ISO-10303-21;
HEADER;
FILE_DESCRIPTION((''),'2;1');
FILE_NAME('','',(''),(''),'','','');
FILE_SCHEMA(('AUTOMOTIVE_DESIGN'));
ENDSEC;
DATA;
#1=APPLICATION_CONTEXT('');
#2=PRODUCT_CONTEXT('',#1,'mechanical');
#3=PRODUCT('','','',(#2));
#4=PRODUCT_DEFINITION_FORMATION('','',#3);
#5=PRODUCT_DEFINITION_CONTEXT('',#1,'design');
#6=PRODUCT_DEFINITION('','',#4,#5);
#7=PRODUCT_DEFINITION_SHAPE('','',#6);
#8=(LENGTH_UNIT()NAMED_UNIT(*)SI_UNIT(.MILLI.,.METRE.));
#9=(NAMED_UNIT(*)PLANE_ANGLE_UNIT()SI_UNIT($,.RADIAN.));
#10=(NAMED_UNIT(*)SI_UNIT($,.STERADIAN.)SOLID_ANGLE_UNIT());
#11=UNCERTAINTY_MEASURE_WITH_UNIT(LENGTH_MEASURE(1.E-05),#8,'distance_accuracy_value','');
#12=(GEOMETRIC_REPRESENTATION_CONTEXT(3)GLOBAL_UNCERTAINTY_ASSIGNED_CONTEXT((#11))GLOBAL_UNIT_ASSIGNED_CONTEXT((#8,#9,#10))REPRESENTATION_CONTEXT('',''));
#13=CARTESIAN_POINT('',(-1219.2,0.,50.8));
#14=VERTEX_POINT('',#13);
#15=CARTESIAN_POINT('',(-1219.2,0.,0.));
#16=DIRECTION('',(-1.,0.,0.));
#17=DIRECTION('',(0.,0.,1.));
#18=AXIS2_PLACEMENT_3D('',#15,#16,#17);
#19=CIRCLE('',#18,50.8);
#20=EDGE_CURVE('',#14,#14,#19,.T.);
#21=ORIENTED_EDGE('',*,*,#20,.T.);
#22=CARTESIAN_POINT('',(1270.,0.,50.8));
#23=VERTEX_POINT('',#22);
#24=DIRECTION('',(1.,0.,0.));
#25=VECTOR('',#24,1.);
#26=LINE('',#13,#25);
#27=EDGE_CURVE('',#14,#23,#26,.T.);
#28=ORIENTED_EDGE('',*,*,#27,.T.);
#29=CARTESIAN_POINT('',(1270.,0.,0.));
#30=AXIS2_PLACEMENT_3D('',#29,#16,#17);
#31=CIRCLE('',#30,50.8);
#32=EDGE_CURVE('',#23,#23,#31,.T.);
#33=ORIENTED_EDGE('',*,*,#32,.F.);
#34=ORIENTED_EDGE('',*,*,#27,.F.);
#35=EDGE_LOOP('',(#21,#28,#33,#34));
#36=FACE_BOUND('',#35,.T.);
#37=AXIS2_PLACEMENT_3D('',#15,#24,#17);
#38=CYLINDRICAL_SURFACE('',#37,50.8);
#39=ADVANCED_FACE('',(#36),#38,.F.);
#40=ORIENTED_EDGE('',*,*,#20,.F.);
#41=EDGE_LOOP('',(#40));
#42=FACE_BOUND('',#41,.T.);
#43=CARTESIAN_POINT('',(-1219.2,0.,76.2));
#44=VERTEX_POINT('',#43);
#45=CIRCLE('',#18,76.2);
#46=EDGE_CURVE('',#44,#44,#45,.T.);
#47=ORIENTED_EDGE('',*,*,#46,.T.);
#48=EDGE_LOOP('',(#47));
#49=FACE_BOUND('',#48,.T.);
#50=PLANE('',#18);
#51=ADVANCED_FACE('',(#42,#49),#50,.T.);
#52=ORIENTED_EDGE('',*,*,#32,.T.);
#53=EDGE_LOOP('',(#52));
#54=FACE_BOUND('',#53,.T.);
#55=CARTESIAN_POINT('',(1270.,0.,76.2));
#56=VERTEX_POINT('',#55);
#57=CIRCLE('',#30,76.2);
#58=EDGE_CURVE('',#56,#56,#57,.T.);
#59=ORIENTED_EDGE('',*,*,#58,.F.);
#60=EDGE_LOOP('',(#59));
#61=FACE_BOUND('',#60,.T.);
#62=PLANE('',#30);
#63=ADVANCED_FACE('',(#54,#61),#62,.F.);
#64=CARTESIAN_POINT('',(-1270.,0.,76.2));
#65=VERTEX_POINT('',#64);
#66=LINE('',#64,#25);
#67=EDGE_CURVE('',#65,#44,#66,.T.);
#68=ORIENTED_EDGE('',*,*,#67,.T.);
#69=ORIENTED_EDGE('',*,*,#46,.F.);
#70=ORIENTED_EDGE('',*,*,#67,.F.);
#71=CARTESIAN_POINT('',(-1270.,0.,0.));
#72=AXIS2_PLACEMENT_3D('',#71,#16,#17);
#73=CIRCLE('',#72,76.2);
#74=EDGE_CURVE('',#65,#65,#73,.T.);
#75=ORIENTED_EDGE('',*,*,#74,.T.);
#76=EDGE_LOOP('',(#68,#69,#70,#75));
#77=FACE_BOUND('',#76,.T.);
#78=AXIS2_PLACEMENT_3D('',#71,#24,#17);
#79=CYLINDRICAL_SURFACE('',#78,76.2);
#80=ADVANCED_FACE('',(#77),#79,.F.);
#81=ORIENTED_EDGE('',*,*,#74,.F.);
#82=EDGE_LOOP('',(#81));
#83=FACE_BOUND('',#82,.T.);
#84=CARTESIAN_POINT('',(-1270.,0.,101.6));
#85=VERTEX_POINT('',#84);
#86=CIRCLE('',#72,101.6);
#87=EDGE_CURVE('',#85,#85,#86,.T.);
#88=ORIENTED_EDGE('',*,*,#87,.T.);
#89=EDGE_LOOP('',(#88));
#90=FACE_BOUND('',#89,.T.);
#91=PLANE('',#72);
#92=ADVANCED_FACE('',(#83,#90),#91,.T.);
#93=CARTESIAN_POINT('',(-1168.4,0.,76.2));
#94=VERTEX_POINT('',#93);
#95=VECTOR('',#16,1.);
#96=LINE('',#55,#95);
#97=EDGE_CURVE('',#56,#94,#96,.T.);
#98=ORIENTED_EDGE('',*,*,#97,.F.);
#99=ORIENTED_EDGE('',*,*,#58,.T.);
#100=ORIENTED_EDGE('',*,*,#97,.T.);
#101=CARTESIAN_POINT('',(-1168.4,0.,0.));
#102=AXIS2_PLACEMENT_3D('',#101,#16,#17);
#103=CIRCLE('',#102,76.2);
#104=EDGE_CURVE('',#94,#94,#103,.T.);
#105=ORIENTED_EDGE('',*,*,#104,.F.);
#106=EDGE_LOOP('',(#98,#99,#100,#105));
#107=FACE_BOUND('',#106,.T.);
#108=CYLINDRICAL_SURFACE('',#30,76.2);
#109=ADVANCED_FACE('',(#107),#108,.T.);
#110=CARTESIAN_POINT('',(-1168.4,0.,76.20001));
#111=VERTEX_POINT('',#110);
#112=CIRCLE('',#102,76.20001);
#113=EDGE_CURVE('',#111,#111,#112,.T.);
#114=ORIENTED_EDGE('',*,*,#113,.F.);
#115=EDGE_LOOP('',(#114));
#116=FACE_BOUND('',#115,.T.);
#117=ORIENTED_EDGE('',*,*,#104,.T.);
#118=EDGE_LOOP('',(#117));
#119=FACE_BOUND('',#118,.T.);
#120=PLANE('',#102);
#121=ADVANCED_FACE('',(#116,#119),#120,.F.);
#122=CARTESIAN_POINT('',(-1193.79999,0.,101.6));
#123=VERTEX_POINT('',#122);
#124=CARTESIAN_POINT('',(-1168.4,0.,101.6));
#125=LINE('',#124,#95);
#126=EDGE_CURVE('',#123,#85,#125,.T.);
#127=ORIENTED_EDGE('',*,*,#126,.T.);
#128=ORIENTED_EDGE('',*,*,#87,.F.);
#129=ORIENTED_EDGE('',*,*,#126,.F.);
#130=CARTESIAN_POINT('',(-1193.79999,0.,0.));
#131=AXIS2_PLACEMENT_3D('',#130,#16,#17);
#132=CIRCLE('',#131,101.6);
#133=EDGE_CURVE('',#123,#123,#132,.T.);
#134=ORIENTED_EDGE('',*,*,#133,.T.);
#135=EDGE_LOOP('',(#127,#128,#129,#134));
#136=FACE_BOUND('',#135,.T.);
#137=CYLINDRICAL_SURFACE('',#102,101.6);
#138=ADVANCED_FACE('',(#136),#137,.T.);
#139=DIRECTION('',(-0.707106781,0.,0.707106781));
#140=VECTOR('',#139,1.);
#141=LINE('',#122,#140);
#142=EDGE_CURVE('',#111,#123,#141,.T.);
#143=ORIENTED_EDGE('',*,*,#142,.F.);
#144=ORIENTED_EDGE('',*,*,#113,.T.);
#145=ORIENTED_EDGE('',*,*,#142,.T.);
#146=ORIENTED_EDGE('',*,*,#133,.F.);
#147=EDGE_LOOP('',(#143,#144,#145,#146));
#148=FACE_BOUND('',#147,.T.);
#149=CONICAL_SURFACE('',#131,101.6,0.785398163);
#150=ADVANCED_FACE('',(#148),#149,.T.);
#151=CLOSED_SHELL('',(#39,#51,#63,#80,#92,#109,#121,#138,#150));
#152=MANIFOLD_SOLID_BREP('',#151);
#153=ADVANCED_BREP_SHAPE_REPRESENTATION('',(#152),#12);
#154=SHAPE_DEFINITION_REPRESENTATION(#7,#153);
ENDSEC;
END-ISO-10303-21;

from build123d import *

# Parameters (mm, degrees)
F2_SIZE = 25.39999


# Not quite as in the source:
# - a fillet or chamfer is up to 0.001 mm smaller than in the source, because OpenCascade refuses the exact size


with BuildPart() as f1:
    # F0 (on Front) → F1 (revolve)
    with BuildSketch(Plane.XZ):
        Polygon((-1219.2, 50.8), (1270, 50.8), (1270, 76.2), (-1168.4, 76.2), (-1168.4, 101.6), (-1219.2, 101.6), (-1270, 101.6), (-1270, 76.2), (-1219.2, 76.2), align=None)
    revolve(axis=Axis((0, 0, 0), (-1, 0, 0)))

    # F2 (size 25.4 in the source; OpenCascade refuses exactly that, so slightly less here)
    f2_edges = [f1.edges().sort_by_distance(p)[0] for p in [
        (-1168.4, 0, -101.6),
    ]]
    chamfer(f2_edges, length=F2_SIZE)


solid = f1.part
